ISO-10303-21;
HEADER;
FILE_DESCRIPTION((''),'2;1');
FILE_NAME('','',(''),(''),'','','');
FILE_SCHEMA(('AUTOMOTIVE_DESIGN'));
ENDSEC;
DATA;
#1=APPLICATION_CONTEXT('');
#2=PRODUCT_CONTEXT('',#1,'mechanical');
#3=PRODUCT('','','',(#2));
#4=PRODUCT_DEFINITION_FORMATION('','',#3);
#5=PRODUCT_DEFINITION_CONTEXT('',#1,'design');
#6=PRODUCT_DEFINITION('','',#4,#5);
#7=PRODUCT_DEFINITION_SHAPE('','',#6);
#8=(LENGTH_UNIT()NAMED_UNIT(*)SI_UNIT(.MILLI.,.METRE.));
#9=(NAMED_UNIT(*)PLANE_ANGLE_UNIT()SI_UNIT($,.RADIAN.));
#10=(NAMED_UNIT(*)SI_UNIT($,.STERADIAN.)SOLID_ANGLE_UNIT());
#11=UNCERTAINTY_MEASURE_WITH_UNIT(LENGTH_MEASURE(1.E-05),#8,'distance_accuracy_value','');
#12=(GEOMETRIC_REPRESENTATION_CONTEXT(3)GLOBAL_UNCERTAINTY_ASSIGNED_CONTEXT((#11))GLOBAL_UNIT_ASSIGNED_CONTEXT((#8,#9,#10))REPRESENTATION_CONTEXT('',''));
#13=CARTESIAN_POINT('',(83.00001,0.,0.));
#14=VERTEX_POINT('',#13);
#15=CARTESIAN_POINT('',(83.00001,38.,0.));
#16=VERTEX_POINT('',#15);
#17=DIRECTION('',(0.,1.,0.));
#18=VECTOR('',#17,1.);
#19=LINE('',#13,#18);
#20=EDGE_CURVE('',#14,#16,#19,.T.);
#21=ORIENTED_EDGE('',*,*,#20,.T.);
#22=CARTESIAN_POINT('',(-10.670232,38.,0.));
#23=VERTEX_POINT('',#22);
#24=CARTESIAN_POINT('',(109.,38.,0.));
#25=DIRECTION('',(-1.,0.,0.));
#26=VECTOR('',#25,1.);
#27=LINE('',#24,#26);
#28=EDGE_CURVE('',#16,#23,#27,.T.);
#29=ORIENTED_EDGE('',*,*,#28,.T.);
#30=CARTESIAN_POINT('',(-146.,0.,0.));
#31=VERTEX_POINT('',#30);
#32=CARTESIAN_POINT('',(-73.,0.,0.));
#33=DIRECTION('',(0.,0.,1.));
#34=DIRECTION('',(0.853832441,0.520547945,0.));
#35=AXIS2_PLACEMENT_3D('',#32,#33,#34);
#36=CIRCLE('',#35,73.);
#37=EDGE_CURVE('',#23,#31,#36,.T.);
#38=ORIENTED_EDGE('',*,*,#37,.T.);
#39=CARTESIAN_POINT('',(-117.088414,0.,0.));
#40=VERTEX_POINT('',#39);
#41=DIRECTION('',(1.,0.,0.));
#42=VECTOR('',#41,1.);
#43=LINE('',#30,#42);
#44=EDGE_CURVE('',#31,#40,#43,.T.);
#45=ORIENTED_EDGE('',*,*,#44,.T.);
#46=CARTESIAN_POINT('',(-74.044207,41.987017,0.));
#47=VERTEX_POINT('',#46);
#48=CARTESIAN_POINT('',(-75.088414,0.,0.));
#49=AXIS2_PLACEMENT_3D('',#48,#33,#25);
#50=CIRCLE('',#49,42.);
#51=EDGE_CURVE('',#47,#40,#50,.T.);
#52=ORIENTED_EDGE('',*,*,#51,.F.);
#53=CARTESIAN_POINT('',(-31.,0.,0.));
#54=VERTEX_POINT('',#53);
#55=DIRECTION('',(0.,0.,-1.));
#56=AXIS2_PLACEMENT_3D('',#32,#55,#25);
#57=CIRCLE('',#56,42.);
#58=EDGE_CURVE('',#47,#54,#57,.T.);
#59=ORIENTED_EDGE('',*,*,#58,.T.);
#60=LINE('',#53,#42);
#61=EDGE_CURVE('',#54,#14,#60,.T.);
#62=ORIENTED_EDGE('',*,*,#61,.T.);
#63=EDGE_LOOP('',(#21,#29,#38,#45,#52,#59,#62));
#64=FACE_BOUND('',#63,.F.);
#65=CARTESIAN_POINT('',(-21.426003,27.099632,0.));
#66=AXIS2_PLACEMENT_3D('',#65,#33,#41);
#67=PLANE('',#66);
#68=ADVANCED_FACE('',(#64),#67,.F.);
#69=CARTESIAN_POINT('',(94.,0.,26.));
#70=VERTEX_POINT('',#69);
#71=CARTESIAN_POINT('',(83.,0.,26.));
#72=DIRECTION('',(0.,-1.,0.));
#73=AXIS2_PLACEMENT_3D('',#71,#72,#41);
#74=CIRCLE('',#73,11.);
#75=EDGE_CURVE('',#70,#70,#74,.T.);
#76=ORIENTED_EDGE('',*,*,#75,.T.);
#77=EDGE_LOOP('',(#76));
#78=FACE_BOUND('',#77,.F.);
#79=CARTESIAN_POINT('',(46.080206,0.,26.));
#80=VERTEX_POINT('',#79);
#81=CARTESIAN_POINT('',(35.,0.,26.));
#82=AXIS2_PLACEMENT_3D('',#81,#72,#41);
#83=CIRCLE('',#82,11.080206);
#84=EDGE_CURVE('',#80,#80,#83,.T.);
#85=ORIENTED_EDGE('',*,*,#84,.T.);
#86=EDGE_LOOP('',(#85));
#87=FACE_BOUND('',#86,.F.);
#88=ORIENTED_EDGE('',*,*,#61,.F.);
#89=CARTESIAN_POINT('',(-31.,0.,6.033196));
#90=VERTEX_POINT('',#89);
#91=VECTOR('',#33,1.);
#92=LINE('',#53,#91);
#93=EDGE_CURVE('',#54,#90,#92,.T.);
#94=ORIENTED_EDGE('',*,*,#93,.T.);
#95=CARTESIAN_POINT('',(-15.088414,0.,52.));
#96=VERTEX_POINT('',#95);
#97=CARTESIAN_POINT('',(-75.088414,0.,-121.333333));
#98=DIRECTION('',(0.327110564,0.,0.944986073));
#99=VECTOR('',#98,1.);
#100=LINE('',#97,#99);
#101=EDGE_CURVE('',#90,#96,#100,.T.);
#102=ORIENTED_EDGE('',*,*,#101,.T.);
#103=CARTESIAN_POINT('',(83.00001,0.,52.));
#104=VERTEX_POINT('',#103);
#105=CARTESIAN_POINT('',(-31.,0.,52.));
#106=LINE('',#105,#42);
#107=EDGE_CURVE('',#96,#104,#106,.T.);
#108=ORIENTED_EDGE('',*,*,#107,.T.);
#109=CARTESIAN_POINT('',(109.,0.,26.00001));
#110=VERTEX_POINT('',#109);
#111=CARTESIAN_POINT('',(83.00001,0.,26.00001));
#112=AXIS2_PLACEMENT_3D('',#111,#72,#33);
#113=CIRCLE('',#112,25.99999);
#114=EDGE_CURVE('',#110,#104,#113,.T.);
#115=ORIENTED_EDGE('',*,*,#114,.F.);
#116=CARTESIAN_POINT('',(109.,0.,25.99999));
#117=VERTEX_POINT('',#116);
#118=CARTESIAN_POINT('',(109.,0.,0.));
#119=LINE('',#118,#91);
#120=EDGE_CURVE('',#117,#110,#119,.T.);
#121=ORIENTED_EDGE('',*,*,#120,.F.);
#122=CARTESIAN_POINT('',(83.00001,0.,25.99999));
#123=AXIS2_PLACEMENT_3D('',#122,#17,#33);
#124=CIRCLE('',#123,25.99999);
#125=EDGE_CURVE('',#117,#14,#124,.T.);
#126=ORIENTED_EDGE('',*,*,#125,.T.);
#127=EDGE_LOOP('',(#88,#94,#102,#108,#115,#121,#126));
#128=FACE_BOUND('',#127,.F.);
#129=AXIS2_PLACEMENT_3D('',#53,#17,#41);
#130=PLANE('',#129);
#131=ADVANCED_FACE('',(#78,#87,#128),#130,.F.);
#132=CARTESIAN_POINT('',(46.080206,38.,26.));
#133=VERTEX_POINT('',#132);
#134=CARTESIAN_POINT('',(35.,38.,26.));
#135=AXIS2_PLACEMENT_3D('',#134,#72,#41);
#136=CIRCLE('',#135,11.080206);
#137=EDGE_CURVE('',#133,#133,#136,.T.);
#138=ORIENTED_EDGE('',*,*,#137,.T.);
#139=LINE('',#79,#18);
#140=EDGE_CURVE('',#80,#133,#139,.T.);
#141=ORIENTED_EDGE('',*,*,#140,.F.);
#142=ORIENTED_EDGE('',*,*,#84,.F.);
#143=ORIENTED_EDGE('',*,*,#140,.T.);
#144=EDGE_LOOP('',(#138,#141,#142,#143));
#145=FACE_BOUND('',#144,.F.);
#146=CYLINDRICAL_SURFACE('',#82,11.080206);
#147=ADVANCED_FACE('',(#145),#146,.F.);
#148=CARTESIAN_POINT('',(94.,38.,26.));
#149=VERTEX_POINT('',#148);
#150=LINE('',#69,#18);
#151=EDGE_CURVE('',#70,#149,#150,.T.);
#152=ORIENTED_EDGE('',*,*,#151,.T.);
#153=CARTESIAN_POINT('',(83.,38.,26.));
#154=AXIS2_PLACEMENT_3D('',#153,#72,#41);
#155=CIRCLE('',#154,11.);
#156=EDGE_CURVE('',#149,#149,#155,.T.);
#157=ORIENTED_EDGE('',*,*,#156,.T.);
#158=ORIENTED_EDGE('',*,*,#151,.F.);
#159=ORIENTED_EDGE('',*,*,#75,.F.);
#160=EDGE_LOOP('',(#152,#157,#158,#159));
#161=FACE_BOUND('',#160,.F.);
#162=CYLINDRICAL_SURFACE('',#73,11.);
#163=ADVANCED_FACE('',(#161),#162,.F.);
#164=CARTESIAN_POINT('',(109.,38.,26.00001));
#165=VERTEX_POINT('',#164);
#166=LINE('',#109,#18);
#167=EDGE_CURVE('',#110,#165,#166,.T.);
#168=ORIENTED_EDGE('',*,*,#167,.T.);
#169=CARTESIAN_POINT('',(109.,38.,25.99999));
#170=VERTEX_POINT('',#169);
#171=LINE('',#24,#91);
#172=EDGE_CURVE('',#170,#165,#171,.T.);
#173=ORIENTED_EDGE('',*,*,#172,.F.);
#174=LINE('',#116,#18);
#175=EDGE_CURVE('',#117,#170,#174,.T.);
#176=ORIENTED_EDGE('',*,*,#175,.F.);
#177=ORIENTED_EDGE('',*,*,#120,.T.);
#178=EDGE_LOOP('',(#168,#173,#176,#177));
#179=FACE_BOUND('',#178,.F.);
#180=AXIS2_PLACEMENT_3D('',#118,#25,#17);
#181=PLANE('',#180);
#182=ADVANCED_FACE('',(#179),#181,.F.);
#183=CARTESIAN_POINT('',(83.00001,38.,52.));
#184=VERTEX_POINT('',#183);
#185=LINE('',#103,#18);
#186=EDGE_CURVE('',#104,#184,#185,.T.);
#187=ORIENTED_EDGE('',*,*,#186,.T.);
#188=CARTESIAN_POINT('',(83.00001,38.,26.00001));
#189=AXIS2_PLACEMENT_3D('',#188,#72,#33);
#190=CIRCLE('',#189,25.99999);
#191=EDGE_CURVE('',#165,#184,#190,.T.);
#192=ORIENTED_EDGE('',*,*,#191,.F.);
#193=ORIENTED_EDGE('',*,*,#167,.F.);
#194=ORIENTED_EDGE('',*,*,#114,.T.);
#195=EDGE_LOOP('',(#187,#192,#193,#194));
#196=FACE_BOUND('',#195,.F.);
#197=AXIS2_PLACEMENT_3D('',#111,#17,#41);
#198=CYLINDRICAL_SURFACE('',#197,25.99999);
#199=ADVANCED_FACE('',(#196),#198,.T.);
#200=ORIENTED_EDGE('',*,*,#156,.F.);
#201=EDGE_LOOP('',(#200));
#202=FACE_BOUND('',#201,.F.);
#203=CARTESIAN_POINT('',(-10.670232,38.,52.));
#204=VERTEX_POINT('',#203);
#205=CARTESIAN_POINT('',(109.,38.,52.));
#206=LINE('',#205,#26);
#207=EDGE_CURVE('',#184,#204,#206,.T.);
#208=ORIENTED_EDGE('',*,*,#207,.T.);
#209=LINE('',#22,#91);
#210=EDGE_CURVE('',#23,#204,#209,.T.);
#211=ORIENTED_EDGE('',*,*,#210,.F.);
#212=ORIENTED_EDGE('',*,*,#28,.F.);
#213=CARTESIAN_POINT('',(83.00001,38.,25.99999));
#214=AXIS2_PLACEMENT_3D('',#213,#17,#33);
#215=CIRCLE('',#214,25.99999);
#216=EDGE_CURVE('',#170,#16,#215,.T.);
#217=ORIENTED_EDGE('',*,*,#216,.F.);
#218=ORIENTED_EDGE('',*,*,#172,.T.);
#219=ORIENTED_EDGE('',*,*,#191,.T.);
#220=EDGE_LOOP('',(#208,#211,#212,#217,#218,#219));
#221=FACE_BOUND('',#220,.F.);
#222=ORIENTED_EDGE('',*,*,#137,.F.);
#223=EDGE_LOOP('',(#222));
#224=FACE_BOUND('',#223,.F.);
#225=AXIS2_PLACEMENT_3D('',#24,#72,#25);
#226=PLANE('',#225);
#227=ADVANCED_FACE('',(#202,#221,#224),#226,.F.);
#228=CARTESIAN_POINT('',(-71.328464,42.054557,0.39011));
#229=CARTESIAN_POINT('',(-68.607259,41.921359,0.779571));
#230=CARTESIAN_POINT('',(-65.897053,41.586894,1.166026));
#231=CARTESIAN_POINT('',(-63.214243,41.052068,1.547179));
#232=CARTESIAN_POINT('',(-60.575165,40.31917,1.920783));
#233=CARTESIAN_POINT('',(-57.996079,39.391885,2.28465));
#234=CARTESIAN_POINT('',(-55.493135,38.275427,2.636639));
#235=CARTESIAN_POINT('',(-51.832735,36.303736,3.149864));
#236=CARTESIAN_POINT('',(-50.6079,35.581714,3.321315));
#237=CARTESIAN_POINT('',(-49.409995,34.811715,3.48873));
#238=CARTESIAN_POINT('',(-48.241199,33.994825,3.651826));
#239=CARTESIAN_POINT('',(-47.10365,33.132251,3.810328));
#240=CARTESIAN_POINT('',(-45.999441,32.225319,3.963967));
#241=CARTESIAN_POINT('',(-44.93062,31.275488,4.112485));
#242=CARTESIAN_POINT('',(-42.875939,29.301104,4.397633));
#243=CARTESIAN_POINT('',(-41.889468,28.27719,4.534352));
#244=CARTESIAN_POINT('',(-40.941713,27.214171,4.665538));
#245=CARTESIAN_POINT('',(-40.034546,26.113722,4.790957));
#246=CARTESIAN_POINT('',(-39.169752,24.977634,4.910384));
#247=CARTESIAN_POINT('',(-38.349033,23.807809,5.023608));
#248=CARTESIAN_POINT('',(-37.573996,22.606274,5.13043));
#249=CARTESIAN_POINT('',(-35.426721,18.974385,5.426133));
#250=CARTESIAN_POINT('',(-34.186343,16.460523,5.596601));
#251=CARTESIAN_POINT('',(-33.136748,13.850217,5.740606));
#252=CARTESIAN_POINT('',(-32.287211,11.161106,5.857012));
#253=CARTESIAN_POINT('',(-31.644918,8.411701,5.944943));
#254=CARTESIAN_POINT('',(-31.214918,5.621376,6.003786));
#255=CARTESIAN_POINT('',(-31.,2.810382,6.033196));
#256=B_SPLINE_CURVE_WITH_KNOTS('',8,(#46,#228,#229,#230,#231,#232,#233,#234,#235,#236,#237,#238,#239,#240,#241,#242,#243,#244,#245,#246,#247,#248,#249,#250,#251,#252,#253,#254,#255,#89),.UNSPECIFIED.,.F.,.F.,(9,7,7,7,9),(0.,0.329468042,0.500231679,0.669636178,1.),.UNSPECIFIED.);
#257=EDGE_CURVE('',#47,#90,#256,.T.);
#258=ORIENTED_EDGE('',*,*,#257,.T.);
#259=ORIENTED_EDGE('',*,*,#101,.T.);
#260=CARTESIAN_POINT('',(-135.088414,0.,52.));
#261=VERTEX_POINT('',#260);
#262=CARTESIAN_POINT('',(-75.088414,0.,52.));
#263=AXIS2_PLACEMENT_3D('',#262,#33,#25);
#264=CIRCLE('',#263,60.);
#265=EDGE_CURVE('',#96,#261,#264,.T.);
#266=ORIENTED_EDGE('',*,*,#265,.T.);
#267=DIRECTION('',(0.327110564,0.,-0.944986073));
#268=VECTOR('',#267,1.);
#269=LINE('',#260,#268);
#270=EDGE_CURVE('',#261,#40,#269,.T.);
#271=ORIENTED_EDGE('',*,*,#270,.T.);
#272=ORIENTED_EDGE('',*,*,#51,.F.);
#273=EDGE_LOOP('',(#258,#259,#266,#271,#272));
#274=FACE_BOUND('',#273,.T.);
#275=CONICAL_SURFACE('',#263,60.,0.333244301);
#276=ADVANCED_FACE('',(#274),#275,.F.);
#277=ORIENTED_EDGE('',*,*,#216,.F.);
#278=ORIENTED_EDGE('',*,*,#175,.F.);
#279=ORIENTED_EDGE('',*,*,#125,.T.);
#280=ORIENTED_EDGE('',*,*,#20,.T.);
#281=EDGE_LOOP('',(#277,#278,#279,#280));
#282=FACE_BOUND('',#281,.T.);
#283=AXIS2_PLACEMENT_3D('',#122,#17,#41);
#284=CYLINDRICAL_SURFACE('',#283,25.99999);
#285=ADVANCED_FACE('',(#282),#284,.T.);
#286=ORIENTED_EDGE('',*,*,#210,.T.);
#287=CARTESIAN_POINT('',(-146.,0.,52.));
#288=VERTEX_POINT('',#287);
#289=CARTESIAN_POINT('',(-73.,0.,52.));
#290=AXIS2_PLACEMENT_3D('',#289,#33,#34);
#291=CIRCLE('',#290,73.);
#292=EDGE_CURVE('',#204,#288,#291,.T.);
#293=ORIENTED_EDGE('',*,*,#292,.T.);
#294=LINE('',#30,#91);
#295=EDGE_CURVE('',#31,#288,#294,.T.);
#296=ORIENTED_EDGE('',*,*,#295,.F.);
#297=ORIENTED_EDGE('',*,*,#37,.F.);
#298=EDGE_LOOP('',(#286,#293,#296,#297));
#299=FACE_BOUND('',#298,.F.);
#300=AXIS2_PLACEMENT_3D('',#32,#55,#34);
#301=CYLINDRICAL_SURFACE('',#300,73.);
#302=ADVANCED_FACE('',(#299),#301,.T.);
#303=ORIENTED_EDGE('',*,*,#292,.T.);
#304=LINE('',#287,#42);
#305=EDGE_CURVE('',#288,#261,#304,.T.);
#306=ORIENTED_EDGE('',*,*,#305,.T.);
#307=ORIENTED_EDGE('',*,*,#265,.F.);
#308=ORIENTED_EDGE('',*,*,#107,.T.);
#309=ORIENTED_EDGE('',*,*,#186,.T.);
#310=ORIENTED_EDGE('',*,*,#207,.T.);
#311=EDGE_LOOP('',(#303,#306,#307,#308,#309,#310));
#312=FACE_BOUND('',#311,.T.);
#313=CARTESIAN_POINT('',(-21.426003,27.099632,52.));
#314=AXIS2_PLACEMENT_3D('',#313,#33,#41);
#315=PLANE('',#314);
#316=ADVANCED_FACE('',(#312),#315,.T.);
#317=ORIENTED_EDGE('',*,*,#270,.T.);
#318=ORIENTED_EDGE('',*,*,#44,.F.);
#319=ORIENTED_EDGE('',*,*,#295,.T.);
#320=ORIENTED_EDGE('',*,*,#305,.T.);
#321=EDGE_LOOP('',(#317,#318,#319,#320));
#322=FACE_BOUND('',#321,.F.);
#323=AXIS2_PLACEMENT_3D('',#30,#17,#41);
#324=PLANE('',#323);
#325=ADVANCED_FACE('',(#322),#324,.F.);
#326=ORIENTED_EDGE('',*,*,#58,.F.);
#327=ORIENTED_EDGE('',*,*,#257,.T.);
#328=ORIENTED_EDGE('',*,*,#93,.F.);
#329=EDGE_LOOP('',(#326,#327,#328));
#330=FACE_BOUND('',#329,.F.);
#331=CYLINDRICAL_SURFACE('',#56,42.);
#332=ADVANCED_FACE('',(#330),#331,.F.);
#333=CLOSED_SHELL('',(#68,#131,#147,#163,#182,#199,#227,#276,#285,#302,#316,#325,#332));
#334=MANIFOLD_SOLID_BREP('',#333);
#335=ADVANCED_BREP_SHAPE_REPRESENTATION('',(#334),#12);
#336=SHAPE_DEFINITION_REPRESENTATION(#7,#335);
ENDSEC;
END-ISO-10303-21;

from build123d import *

# Parameters (mm, degrees)
F1_DEPTH = 52
F2_R     = 11.0802059784
F2_R_2   = 11
F3_DEPTH = 51.6
F4_R     = 25.99999


# Not quite as in the source:
# - a fillet or chamfer is up to 0.001 mm smaller than in the source, because OpenCascade refuses the exact size


with BuildPart() as f1:
    # F0 (on Top) → F1 (new body)
    with BuildSketch(Plane.XY):
        with BuildLine():
            Line((109, 38), (-10.670231831, 38))
            ThreePointArc((-10.670231831, 38), (-92.7348286497, 70.2818364741), (-146, 0))
            Line((-146, 0), (-115, 0))
            ThreePointArc((-115, 0), (-73, 42), (-31, 0))
            Line((-31, 0), (109, 0))
            Line((109, 0), (109, 38))
        make_face()
    extrude(amount=F1_DEPTH)

    # F2 (on face) → F3 (cut)
    with BuildSketch(Plane.XZ):
        with Locations((35, 26)):
            Circle(F2_R)
        with Locations((83, 26)):
            Circle(F2_R_2)
    extrude(amount=-F3_DEPTH, mode=Mode.SUBTRACT)

    # F4 (radius 26 in the source; OpenCascade refuses exactly that, so slightly less here)
    f4_edges = [f1.edges().sort_by_distance(p)[0] for p in [
        (109, 19, 52),
        (109, 19, 0),
    ]]
    fillet(f4_edges, radius=F4_R)

    # F5 (on face) → F6 (revolve, cut)
    with BuildSketch(Plane.XZ):
        Polygon((-75.0884139538, 52), (-135.0884139538, 52), (-117.0884139538, 0), (-75.0884139538, 0), align=None)
    revolve(axis=Axis((-75.0884139538, 0, 26), (0, 0, 1)), mode=Mode.SUBTRACT)


solid = f1.part
